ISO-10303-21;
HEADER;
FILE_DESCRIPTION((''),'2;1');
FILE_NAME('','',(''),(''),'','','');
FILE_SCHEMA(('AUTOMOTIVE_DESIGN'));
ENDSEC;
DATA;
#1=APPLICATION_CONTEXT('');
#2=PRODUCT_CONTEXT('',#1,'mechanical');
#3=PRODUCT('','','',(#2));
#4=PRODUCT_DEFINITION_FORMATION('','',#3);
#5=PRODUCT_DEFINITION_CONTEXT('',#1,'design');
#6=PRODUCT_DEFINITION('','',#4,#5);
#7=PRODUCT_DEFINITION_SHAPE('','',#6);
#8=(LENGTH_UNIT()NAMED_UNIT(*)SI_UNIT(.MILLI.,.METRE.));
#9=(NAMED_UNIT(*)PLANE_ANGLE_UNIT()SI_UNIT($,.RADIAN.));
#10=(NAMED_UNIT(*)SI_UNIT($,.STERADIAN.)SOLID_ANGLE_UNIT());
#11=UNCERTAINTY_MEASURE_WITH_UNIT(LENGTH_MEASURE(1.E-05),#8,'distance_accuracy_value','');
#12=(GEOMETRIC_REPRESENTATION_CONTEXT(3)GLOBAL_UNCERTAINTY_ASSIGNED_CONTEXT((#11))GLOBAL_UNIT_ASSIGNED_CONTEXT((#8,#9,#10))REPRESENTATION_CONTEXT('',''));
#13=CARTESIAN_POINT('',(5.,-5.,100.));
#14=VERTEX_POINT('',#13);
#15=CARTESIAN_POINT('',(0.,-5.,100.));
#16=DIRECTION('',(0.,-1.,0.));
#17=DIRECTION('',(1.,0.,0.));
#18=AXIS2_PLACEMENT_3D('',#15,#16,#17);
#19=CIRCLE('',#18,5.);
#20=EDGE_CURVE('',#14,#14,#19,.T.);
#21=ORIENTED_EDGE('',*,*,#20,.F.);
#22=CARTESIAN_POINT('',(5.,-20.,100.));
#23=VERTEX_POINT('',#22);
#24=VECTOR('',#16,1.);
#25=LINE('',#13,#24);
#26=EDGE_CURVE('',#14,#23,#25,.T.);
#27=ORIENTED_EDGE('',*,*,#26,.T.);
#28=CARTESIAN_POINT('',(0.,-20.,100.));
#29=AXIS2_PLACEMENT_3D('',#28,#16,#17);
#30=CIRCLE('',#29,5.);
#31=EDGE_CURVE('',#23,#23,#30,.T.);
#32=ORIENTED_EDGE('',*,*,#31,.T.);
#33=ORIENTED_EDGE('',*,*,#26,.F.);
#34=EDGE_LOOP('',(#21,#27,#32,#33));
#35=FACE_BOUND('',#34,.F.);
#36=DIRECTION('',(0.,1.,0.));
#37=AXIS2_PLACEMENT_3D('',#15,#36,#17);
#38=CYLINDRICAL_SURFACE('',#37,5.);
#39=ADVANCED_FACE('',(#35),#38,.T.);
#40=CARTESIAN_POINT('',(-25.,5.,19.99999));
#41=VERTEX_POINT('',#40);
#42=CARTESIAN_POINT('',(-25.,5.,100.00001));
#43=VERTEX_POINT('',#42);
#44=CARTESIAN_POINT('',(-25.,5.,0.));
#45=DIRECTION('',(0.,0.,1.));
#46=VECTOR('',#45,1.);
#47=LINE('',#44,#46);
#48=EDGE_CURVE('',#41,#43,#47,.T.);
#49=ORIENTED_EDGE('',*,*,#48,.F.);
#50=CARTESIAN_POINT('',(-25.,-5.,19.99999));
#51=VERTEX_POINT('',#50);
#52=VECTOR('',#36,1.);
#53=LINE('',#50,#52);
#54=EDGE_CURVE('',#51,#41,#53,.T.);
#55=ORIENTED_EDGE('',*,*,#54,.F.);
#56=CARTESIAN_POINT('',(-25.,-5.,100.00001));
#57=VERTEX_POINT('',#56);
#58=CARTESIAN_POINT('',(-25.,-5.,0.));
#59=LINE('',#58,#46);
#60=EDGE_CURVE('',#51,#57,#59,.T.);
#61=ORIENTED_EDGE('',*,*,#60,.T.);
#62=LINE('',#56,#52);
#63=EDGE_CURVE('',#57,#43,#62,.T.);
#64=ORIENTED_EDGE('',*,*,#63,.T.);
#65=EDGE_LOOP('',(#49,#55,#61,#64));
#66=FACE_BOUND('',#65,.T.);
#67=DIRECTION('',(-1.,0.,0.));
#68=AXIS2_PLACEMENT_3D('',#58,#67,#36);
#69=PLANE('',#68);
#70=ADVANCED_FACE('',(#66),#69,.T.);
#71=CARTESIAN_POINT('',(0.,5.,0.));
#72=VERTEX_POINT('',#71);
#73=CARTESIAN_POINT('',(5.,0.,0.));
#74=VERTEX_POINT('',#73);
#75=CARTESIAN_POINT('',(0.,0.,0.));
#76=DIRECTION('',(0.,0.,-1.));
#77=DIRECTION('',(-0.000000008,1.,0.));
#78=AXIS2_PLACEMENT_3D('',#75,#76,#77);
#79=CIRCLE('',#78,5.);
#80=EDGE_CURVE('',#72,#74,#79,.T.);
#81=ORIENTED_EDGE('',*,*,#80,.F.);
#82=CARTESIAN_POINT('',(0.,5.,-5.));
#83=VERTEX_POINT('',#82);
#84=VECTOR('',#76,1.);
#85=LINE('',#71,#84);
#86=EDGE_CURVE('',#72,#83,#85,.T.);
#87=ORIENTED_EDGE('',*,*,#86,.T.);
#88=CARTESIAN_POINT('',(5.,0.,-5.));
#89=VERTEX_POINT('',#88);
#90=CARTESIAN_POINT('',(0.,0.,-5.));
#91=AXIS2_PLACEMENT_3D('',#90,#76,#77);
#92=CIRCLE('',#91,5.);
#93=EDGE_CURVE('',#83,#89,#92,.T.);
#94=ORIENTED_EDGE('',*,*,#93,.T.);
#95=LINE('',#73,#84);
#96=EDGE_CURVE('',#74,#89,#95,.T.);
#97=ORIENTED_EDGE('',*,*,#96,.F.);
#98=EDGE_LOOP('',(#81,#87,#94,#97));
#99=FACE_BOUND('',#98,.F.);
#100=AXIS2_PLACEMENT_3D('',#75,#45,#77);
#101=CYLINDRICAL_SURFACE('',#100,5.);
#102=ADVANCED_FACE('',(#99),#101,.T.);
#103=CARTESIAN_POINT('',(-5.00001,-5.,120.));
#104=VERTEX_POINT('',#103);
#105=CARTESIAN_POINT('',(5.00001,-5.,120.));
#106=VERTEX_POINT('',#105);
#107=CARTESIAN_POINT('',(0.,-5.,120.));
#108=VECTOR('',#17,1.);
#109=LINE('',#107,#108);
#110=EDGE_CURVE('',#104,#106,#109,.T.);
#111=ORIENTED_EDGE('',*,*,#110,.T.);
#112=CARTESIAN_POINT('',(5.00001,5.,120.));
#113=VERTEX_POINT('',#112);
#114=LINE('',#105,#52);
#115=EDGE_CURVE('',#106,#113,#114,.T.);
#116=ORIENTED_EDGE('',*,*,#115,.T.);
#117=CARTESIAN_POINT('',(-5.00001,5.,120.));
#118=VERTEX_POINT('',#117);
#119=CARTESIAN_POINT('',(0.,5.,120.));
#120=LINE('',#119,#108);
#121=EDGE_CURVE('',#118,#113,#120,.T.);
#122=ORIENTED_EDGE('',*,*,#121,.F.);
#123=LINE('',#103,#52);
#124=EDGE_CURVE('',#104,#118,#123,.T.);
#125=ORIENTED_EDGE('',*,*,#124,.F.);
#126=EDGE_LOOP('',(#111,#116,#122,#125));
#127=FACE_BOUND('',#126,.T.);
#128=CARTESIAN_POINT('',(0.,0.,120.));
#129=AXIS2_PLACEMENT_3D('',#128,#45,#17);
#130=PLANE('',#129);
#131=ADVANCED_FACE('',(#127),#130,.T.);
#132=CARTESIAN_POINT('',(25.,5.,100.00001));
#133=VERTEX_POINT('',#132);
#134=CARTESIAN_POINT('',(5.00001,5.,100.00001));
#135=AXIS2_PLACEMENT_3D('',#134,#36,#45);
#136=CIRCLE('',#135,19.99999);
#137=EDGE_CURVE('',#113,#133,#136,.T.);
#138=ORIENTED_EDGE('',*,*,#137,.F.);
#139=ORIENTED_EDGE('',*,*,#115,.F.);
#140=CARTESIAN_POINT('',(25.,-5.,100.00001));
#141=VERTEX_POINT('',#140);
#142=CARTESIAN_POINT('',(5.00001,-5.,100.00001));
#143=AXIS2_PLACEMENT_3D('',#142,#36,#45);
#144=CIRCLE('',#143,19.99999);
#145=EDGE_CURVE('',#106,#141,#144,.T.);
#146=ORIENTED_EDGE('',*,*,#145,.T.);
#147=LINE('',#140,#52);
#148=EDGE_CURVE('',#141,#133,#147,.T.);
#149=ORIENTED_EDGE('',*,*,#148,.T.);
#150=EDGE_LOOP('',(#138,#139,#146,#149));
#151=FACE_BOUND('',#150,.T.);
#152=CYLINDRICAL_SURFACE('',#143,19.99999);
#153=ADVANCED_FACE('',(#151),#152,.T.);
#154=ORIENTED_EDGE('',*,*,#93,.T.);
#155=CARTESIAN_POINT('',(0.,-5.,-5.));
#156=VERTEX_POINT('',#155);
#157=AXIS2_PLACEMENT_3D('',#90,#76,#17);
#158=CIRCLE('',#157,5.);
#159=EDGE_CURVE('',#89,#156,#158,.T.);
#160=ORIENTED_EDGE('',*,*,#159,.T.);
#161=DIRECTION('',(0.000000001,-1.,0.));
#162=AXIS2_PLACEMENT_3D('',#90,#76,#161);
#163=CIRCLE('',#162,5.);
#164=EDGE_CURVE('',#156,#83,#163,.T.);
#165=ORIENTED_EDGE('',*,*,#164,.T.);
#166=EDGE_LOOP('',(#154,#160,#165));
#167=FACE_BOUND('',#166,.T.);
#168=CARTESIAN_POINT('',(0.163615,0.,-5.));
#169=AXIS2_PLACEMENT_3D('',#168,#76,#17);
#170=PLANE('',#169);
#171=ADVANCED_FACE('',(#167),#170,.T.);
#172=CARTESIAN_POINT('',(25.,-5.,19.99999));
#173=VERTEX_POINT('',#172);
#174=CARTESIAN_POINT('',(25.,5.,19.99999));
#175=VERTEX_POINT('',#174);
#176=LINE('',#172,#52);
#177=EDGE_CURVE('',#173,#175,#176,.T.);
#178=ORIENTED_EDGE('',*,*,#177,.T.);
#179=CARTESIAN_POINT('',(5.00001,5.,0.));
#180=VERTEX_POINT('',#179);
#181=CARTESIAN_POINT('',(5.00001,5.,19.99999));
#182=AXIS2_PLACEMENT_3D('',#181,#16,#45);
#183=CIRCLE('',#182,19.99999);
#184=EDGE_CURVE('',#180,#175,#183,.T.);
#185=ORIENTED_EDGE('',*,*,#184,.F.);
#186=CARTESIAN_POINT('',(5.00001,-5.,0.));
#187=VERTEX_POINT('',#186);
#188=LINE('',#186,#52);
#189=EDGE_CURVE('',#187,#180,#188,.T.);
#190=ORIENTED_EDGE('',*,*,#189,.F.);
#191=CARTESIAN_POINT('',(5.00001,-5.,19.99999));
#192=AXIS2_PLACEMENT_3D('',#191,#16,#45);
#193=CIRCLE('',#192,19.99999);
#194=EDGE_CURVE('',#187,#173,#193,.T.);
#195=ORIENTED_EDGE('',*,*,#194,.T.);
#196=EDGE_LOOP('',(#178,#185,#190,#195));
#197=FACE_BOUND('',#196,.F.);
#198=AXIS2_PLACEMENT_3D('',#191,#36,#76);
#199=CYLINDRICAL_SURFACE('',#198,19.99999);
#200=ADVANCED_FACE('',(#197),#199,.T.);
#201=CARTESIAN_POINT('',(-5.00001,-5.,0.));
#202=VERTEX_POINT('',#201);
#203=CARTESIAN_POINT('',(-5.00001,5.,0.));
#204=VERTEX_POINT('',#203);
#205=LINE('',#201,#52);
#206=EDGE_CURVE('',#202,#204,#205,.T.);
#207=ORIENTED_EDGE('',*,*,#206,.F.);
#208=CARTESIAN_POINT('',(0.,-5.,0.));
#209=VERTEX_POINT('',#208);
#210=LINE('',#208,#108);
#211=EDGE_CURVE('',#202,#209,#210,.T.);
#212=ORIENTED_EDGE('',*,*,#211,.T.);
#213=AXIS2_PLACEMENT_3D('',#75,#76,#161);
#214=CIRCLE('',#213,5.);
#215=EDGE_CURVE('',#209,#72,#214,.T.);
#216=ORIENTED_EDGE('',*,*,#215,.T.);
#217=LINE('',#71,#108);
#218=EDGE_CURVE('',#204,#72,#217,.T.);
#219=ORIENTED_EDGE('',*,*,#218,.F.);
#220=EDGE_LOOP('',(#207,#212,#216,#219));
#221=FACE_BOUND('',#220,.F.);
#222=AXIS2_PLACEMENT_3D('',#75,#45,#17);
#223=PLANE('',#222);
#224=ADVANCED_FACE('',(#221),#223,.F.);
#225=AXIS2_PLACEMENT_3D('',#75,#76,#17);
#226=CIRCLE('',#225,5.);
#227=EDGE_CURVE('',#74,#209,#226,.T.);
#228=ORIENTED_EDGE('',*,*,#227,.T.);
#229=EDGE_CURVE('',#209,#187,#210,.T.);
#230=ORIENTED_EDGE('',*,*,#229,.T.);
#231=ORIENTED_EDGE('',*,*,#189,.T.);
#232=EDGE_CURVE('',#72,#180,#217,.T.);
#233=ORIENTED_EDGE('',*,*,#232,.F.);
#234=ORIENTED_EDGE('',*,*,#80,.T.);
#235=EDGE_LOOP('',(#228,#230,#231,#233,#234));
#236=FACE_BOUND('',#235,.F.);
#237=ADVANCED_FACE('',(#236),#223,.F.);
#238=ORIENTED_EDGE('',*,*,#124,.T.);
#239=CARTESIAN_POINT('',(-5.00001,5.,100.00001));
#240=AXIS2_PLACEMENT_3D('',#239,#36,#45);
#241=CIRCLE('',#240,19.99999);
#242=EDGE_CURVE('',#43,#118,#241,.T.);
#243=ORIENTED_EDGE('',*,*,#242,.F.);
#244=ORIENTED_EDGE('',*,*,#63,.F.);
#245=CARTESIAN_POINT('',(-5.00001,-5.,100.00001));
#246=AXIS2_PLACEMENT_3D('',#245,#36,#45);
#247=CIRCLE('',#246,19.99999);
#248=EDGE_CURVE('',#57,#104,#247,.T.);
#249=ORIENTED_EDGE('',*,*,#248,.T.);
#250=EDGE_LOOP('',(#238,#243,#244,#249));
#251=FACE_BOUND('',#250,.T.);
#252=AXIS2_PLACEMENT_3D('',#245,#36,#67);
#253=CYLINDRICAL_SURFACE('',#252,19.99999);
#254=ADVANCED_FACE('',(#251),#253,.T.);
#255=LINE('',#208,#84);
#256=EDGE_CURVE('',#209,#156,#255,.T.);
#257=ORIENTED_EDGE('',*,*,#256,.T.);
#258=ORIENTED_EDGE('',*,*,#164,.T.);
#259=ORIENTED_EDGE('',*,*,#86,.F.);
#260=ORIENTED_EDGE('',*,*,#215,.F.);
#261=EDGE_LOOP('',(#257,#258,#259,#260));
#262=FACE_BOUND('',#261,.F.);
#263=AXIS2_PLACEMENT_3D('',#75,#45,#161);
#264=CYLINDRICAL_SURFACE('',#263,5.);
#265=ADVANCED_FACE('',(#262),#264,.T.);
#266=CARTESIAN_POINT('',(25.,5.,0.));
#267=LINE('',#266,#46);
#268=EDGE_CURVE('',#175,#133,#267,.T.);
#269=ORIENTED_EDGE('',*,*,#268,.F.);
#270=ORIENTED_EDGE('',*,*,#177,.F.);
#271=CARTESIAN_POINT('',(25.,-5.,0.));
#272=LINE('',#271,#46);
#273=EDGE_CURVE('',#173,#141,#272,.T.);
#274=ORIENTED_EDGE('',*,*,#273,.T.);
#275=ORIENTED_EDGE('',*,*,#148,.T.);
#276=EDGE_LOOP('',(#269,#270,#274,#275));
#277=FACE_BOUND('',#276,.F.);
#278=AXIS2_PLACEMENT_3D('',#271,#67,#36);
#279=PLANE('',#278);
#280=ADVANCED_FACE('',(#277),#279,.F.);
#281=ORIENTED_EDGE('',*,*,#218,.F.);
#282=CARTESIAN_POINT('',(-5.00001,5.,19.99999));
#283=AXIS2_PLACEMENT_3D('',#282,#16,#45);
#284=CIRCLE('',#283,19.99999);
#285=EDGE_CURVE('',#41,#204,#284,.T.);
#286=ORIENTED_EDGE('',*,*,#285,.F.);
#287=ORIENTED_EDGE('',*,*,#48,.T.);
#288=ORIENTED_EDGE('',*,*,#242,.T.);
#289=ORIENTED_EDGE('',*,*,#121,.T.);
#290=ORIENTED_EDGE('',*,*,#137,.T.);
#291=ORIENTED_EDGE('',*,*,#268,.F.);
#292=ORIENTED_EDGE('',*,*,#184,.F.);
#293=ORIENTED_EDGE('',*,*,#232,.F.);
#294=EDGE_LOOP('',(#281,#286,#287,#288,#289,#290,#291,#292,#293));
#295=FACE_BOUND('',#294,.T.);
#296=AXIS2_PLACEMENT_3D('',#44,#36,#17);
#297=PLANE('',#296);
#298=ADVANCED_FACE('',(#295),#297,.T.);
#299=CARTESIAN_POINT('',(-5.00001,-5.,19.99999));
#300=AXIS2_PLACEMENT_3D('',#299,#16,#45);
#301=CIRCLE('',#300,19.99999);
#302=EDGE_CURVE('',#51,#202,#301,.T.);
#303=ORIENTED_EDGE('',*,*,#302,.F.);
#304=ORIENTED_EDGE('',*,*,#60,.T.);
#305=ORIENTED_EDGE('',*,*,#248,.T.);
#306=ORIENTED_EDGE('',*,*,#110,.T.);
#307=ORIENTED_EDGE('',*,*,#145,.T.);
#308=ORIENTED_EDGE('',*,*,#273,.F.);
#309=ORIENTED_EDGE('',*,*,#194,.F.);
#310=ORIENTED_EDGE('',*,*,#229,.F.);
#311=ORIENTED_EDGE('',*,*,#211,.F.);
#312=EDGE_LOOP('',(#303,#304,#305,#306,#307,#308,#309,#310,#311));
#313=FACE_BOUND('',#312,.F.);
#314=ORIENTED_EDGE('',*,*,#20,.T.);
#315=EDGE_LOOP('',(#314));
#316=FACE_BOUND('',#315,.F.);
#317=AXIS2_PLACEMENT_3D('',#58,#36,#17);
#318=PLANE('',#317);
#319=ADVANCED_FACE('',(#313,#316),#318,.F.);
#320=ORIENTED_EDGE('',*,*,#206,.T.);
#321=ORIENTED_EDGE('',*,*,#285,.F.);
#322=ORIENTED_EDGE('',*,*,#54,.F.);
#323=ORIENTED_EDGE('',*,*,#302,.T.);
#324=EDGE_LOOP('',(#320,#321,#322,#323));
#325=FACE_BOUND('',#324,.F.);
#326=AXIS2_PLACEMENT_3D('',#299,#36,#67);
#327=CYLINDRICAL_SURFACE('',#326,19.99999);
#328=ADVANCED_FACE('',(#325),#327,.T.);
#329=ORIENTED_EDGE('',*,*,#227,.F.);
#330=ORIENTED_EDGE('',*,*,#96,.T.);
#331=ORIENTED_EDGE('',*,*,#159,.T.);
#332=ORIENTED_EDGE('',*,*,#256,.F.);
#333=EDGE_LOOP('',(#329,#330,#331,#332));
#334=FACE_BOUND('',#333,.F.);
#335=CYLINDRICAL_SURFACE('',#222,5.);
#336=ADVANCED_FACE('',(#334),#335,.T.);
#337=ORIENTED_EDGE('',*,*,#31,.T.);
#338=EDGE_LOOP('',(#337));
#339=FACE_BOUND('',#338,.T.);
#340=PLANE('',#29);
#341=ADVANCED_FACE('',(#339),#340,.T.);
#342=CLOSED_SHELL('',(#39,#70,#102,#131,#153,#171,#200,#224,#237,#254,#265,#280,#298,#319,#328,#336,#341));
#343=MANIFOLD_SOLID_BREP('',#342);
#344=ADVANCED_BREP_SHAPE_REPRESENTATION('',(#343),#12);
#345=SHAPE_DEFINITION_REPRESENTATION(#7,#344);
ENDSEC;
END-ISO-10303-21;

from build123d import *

# Parameters (mm, degrees)
F0_W     = 50
F0_H     = 10
F1_DEPTH = 120
F2_R     = 5
F3_DEPTH = 15
F5_DEPTH = 5
F6_R     = 19.99999


# Not quite as in the source:
# - a fillet or chamfer is up to 0.001 mm smaller than in the source, because OpenCascade refuses the exact size


with BuildPart() as f1:
    # F0 (on Top) → F1 (new body)
    with BuildSketch(Plane.XY):
        Rectangle(F0_W, F0_H)
    extrude(amount=F1_DEPTH)

    # F2 (on face) → F3 (join)
    with BuildSketch(Plane.XZ.offset(5)):
        with Locations((0, 100)):
            Circle(F2_R)
    extrude(amount=F3_DEPTH)

    # F4 (on face) → F5 (join)
    with BuildSketch(Plane(origin=(0, 0, 0), x_dir=(1, 0, 0), z_dir=(0, 0, -1))):
        with BuildLine():
            ThreePointArc((-3.84e-08, -5), (3.5355338924, -3.5355339195), (5, 0))
            ThreePointArc((5, 0), (3.5355339085, 3.5355339034), (7.2e-09, 5))
            ThreePointArc((7.2e-09, 5), (-5, 2.28e-08), (-3.84e-08, -5))
        make_face()
    extrude(amount=F5_DEPTH)

    # F6 (radius 20 in the source; OpenCascade refuses exactly that, so slightly less here)
    f6_edges = [f1.edges().sort_by_distance(p)[0] for p in [
        (25, 0, 0),
        (-25, 0, 0),
        (-25, 0, 120),
        (25, 0, 120),
    ]]
    fillet(f6_edges, radius=F6_R)


solid = f1.part
